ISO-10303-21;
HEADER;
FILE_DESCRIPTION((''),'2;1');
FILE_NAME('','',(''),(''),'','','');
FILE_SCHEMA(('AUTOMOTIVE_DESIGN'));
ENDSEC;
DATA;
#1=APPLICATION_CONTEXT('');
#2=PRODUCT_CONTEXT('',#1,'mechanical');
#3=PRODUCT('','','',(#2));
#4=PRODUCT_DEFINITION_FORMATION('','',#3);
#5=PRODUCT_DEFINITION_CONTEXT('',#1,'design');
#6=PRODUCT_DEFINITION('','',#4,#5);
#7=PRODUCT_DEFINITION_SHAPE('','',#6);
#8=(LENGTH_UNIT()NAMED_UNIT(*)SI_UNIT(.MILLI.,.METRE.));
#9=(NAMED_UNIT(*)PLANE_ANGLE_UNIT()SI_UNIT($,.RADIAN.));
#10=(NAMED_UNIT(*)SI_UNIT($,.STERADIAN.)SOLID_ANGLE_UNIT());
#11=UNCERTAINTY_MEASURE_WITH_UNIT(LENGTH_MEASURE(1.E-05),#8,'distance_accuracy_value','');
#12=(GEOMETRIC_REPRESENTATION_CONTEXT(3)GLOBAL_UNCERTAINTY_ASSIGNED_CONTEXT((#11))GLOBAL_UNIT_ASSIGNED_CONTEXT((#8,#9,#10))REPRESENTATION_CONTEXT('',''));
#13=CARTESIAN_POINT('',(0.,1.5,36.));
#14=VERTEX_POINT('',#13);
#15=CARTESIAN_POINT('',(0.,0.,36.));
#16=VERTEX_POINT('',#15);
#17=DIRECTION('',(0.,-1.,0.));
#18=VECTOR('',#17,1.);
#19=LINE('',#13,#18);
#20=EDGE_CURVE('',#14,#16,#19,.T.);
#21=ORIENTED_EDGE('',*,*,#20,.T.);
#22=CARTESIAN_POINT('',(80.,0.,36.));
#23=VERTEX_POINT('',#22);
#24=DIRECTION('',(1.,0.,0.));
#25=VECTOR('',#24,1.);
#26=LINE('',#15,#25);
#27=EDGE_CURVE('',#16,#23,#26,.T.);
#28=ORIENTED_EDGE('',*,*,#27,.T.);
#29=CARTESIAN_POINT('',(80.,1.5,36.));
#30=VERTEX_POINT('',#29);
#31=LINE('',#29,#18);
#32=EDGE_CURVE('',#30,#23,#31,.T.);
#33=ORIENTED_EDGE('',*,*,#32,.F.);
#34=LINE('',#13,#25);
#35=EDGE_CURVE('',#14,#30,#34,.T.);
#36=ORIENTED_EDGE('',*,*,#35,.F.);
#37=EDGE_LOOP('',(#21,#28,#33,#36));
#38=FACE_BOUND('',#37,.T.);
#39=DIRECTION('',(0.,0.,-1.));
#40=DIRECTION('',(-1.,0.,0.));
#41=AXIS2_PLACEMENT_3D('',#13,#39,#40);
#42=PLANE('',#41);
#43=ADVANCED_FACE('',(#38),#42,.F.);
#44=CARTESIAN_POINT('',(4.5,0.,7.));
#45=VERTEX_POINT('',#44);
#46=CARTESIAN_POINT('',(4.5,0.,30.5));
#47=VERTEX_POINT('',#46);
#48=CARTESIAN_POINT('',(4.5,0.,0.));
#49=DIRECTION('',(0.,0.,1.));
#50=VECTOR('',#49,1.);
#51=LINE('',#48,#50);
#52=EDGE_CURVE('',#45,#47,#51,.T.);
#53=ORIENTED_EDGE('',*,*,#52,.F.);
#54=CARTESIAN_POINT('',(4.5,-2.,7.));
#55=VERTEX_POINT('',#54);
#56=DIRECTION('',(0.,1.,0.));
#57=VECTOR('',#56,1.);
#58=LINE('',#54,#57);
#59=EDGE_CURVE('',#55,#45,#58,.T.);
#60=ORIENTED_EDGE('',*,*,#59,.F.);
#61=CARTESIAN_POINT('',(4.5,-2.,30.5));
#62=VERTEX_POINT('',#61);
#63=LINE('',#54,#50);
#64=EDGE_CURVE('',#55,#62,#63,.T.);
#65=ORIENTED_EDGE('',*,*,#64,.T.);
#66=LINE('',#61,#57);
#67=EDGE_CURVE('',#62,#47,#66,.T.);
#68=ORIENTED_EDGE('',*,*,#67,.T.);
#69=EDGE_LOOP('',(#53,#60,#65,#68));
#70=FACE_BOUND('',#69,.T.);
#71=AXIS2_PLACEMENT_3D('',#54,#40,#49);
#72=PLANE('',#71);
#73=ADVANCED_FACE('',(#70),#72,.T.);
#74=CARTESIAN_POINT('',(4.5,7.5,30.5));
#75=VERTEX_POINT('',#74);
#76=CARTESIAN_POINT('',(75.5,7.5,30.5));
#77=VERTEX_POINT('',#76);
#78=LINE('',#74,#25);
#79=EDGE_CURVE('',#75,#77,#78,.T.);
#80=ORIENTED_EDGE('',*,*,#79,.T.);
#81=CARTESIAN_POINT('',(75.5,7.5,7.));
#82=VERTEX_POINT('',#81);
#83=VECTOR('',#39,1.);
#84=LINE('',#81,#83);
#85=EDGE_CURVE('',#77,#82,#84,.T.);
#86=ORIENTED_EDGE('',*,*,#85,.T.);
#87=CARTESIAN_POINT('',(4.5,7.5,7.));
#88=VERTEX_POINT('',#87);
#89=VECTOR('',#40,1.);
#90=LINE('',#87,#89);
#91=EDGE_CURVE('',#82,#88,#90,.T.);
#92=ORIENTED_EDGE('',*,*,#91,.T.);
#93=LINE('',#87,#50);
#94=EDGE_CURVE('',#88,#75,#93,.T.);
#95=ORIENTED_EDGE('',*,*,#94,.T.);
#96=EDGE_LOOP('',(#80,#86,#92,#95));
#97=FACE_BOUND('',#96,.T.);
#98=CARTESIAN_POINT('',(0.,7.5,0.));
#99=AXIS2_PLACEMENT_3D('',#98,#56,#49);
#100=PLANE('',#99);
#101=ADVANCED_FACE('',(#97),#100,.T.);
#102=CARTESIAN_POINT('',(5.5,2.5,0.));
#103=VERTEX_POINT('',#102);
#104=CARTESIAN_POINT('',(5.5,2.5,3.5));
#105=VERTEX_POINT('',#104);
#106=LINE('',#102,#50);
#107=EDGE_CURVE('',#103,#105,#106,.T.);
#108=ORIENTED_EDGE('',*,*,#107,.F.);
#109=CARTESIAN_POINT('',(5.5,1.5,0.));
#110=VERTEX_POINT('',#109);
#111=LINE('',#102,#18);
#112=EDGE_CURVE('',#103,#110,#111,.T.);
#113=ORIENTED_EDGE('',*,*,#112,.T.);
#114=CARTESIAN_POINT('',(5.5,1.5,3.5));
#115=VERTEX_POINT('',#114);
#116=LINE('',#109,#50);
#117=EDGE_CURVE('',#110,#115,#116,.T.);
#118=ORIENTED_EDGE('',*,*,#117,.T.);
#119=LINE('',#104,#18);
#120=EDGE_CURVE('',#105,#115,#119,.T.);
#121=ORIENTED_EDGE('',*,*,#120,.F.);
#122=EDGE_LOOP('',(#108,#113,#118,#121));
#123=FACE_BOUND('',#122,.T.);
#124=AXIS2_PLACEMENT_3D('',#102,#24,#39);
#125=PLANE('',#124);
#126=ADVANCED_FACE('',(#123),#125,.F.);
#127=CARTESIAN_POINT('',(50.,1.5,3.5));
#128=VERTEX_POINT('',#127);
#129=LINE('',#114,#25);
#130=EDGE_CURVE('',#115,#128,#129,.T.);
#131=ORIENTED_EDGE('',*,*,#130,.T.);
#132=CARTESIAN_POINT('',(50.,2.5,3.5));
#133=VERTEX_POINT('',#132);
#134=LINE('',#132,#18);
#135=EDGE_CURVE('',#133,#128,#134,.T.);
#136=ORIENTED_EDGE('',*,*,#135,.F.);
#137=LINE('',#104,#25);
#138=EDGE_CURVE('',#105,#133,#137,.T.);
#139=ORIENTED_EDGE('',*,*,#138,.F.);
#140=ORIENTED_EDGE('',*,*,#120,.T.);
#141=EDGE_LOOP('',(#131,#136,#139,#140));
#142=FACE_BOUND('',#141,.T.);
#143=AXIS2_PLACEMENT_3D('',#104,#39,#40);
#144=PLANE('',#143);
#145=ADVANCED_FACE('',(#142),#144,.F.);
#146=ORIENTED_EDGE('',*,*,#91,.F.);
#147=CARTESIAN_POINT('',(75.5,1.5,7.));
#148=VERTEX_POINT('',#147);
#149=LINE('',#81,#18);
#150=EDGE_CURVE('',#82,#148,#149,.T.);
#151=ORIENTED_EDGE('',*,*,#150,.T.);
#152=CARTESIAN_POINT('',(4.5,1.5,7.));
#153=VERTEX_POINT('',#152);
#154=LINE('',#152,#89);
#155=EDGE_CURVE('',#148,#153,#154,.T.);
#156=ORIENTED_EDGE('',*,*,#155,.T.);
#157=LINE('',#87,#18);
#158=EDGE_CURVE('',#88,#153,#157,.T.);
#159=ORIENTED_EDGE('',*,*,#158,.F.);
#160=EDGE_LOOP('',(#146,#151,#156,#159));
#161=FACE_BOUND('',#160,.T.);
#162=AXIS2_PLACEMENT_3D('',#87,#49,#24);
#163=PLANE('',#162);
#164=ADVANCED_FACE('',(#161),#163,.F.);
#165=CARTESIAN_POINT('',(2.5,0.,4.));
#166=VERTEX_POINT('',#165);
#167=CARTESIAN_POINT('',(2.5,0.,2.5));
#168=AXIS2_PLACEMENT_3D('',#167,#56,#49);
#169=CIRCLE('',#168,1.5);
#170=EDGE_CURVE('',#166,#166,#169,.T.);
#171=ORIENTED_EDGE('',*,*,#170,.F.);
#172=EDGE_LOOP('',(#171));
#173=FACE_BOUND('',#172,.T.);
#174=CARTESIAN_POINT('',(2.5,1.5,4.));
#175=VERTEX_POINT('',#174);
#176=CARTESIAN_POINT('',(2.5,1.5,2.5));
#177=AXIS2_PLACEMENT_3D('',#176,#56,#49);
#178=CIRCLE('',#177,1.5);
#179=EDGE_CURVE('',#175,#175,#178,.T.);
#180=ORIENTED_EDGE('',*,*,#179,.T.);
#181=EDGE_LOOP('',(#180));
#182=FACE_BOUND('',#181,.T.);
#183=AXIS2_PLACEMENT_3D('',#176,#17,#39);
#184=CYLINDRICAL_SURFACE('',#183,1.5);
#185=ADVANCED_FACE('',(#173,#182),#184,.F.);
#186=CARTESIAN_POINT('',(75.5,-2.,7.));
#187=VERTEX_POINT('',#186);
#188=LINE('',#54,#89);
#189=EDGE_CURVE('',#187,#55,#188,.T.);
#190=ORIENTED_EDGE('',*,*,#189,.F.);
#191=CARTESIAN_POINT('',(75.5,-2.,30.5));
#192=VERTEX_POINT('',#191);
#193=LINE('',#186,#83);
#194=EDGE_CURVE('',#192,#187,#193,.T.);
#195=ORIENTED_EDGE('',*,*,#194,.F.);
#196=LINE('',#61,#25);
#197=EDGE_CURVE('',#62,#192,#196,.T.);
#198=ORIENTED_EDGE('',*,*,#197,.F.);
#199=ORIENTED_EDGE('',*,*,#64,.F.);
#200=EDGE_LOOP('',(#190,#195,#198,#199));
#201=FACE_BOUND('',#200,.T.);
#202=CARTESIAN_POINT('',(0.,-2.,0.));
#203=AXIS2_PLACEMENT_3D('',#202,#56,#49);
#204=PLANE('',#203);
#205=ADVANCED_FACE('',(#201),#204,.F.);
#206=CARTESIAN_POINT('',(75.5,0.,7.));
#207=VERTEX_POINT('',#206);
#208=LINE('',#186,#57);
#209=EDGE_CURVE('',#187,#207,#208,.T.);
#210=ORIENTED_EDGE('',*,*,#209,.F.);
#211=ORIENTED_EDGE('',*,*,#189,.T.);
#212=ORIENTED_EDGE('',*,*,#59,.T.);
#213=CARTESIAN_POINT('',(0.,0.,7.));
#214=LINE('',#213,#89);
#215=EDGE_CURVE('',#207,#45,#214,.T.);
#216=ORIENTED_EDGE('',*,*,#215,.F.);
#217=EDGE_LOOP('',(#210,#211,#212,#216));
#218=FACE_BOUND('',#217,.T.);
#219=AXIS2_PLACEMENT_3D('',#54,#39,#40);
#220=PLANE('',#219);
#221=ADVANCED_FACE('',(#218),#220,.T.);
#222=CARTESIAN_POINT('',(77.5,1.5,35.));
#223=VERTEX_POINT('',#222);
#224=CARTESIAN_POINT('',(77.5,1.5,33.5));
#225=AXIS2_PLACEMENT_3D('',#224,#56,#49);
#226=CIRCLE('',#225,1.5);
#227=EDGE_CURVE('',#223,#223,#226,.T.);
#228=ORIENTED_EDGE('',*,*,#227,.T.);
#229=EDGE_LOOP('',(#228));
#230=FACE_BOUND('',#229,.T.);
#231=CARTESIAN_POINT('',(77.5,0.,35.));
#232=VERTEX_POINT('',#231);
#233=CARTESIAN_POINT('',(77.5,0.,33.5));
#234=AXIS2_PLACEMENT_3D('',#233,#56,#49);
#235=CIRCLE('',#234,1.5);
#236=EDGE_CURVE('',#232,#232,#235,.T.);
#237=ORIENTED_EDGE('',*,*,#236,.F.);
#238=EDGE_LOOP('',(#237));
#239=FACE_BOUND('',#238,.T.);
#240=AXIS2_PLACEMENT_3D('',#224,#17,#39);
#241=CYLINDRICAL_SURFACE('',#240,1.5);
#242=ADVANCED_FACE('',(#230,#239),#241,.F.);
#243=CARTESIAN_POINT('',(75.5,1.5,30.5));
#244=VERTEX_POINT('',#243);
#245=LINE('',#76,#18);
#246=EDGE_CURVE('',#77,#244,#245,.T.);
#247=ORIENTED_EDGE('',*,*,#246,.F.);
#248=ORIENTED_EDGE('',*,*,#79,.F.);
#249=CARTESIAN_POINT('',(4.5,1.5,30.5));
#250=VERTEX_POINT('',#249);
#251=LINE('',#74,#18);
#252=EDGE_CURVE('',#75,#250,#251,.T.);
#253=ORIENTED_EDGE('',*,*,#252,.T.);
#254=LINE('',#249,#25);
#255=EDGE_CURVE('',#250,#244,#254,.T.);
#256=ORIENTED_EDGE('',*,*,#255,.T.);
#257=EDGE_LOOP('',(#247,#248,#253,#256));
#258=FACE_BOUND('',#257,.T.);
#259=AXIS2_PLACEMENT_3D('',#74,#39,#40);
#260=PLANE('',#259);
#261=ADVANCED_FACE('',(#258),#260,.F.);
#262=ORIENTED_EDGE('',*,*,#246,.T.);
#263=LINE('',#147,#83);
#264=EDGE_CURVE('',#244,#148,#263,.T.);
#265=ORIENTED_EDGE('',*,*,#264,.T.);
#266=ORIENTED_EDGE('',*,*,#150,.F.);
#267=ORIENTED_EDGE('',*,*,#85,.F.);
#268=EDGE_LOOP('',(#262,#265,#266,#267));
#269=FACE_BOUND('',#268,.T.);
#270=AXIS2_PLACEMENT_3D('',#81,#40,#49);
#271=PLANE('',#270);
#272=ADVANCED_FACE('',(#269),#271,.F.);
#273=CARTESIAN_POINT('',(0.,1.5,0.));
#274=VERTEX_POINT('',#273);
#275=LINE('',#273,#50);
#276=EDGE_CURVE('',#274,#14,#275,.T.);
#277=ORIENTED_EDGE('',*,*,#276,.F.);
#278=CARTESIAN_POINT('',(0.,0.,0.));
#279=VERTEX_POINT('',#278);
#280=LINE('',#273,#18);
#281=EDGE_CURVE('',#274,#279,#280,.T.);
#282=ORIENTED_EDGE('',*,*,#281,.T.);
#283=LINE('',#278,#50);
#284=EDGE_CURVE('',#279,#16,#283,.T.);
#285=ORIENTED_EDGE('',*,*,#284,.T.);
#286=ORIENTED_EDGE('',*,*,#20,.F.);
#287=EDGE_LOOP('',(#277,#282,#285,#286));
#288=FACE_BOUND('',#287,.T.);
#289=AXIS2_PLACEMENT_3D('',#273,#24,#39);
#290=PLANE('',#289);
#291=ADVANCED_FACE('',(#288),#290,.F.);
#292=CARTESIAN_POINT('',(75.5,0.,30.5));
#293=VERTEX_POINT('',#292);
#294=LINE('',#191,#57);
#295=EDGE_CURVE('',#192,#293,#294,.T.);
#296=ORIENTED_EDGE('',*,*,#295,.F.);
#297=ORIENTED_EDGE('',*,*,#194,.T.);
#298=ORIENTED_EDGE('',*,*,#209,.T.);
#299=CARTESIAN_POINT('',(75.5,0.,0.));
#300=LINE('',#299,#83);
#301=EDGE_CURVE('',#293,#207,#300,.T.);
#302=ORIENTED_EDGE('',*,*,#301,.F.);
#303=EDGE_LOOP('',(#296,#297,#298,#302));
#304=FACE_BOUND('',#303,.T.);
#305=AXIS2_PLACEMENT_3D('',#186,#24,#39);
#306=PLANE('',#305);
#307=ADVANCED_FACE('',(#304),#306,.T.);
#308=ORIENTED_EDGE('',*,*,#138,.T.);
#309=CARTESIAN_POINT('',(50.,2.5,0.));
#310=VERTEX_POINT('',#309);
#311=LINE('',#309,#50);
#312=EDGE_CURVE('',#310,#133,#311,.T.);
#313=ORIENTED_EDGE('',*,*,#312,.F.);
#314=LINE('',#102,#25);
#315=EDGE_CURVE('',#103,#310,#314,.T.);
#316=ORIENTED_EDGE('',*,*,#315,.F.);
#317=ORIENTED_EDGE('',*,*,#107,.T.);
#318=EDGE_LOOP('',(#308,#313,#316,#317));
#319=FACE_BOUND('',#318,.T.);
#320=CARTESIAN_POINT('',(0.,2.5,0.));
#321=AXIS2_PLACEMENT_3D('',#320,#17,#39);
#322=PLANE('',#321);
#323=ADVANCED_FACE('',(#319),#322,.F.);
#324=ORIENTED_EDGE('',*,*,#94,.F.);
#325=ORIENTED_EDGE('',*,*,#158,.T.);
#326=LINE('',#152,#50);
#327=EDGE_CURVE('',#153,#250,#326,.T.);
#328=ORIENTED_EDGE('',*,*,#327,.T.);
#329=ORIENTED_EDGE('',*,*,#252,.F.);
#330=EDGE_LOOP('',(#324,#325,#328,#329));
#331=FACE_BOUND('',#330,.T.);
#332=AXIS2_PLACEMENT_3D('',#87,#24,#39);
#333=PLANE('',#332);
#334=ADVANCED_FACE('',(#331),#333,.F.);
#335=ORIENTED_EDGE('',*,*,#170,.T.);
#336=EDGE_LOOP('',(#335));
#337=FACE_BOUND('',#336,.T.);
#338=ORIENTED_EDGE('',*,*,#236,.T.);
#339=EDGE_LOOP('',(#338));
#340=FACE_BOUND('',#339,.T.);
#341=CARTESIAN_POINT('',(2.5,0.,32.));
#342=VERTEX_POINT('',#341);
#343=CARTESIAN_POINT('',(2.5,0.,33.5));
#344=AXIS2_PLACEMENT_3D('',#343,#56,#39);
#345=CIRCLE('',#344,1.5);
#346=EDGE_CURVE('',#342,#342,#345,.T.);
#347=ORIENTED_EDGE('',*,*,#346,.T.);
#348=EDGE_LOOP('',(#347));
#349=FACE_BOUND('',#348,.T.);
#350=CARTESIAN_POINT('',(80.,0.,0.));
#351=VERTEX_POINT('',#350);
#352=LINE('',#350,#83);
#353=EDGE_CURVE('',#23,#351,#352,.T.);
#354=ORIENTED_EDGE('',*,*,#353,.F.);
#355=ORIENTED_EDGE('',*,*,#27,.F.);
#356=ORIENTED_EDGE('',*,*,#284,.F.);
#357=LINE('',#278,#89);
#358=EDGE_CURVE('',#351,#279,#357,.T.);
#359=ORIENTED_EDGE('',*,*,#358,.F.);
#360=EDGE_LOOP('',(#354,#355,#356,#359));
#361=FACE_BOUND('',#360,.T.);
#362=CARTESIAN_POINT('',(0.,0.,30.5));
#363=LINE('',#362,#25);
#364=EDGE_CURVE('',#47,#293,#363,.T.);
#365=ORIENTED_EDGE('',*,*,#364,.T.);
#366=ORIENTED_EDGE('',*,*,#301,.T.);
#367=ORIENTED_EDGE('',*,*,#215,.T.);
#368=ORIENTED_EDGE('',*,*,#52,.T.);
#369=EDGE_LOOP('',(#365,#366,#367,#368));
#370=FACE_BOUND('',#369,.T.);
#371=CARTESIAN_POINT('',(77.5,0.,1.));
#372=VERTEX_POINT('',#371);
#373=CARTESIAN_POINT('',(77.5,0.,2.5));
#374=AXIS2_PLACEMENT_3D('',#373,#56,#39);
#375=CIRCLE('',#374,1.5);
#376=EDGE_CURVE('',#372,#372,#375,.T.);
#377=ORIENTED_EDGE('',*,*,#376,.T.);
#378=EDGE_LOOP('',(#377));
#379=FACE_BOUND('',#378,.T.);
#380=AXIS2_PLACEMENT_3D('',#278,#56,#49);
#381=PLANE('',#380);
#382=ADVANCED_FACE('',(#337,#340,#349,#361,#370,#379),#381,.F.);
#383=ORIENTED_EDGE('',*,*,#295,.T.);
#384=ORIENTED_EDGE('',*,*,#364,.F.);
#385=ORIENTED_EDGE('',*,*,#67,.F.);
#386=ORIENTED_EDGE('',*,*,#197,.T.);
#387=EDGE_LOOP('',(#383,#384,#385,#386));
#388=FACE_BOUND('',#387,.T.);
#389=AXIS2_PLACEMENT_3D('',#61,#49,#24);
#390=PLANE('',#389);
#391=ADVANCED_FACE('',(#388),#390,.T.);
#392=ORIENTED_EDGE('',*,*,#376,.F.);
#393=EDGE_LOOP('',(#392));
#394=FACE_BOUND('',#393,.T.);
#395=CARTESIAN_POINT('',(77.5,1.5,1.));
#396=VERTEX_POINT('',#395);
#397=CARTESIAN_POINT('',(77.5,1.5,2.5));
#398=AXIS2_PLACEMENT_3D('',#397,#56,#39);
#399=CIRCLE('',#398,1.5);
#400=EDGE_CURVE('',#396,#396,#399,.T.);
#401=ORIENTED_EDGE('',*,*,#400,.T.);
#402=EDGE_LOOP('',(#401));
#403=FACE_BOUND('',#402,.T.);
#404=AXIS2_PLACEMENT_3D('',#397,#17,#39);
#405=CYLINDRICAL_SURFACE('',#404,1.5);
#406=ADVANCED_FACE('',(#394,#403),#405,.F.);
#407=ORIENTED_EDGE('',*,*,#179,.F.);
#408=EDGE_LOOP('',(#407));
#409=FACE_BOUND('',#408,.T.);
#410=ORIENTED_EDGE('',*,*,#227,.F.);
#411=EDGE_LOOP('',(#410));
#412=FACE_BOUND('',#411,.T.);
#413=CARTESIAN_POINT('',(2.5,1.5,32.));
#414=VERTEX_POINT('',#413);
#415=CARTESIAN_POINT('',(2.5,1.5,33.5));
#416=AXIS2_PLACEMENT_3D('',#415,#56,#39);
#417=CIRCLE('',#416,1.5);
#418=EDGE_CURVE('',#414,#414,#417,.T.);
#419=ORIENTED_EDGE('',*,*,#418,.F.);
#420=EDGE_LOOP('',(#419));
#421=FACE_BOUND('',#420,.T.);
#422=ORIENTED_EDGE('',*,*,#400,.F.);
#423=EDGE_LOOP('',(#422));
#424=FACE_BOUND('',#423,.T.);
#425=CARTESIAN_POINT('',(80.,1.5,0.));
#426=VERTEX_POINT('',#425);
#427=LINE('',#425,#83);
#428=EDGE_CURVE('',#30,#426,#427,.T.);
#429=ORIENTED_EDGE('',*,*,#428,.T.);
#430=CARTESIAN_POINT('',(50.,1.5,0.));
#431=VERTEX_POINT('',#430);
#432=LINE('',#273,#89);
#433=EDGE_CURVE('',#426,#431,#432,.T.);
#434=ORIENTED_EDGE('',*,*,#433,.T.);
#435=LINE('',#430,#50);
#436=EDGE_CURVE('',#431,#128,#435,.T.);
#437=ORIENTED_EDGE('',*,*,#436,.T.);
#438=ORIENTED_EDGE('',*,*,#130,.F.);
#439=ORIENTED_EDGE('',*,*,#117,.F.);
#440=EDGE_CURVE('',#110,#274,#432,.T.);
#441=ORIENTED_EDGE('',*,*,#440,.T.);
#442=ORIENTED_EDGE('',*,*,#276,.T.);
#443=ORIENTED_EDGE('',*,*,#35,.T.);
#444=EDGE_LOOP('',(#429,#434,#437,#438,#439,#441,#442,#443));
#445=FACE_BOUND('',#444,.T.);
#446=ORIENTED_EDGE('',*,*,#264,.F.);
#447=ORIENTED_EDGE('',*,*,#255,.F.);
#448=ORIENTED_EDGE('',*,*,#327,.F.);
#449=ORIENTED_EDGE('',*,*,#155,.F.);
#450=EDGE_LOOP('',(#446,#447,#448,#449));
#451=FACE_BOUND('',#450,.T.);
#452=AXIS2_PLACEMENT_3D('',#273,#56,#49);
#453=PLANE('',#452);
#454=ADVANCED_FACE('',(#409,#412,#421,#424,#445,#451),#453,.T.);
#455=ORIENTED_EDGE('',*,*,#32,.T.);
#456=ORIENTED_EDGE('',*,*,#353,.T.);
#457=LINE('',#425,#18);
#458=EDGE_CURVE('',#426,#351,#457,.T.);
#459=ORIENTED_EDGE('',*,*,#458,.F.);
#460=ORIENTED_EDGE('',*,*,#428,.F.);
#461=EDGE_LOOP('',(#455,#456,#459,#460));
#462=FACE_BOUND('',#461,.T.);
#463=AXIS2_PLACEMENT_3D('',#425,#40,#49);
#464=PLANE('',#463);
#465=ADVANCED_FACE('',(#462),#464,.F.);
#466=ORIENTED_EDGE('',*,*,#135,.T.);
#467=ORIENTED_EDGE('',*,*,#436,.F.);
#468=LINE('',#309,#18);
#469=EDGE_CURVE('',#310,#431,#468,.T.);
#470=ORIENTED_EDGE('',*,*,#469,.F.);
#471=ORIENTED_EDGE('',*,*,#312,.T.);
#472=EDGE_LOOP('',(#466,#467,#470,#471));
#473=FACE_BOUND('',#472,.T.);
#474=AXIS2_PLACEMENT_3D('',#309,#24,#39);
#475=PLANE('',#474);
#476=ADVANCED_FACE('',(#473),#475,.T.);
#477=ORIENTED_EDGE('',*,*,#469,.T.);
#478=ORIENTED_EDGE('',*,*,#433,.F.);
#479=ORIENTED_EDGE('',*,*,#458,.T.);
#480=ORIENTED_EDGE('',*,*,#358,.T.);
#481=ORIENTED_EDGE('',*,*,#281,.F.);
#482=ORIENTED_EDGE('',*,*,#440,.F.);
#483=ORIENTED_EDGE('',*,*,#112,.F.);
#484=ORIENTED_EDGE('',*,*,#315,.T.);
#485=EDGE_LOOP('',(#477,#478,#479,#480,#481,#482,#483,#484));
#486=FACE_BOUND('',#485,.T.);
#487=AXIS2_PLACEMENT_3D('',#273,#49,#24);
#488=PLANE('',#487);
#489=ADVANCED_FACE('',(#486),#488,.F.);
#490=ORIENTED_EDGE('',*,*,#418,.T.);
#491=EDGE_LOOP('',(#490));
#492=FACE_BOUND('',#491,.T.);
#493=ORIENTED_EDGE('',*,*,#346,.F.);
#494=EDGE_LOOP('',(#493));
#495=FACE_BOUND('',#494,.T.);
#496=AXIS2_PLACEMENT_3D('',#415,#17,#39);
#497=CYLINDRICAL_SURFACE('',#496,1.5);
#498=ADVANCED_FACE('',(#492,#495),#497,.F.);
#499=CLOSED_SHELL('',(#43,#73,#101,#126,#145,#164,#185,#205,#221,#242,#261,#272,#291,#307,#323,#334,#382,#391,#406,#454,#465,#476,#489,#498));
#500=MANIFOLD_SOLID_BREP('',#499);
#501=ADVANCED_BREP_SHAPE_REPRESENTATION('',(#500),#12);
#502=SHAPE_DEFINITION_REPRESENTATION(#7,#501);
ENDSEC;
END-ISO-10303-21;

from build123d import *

# Parameters (mm, degrees)
SKETCH_1_W            = 80
SKETCH_1_H            = 36
SKETCH_1_R            = 1.5
EXTRUDE_1_DEPTH       = 1.5
EXTRUDE_START         = 7
EXTRUDE_2_OUTLINE_W   = 71
EXTRUDE_2_OUTLINE_H   = 6
EXTRUDE_2_OUTLINE_H_2 = 2
EXTRUDE_2_DEPTH       = 23.5
EXTRUDE_2_2_OUTLINE_W = 44.5
EXTRUDE_2_2_OUTLINE_H = 1
EXTRUDE_2_2_DEPTH     = 3.5


# Read off the part's stored shape, not the designer's step: Бобышка-Вытянуть2
with BuildPart() as part:
    # Эскиз1 (on Top Plane) → Бобышка-Вытянуть1 (new body)
    with BuildSketch(Plane(origin=(0, 0, 0), x_dir=(1, 0, 0), z_dir=(0, 1, 0))):
        with Locations((40, -18)):
            Rectangle(SKETCH_1_W, SKETCH_1_H)
        with Locations(Location((2.5, -2.5, 0), (0, 0, 270))):
            Circle(SKETCH_1_R, mode=Mode.SUBTRACT)
        with Locations(Location((77.5, -2.5, 0), (0, 0, 90))):
            Circle(SKETCH_1_R, mode=Mode.SUBTRACT)
        with Locations(Location((77.5, -33.5, 0), (0, 0, 270))):
            Circle(SKETCH_1_R, mode=Mode.SUBTRACT)
        with Locations(Location((2.5, -33.5, 0), (0, 0, 90))):
            Circle(SKETCH_1_R, mode=Mode.SUBTRACT)
    extrude(amount=EXTRUDE_1_DEPTH)

    # Бобышка-Вытянуть2 outline → Бобышка-Вытянуть2 (add)
    with BuildSketch(Plane.XY.offset(EXTRUDE_START)):
        with Locations((40, 4.5)):
            Rectangle(EXTRUDE_2_OUTLINE_W, EXTRUDE_2_OUTLINE_H)
        with Locations((40, -1)):
            Rectangle(EXTRUDE_2_OUTLINE_W, EXTRUDE_2_OUTLINE_H_2)
    extrude(amount=EXTRUDE_2_DEPTH)

    # Extrude 2 2 outline → Extrude 2 2 (add)
    with BuildSketch(Plane.XY):
        with Locations((27.75, 2)):
            Rectangle(EXTRUDE_2_2_OUTLINE_W, EXTRUDE_2_2_OUTLINE_H)
    extrude(amount=EXTRUDE_2_2_DEPTH)


solid = part.part
